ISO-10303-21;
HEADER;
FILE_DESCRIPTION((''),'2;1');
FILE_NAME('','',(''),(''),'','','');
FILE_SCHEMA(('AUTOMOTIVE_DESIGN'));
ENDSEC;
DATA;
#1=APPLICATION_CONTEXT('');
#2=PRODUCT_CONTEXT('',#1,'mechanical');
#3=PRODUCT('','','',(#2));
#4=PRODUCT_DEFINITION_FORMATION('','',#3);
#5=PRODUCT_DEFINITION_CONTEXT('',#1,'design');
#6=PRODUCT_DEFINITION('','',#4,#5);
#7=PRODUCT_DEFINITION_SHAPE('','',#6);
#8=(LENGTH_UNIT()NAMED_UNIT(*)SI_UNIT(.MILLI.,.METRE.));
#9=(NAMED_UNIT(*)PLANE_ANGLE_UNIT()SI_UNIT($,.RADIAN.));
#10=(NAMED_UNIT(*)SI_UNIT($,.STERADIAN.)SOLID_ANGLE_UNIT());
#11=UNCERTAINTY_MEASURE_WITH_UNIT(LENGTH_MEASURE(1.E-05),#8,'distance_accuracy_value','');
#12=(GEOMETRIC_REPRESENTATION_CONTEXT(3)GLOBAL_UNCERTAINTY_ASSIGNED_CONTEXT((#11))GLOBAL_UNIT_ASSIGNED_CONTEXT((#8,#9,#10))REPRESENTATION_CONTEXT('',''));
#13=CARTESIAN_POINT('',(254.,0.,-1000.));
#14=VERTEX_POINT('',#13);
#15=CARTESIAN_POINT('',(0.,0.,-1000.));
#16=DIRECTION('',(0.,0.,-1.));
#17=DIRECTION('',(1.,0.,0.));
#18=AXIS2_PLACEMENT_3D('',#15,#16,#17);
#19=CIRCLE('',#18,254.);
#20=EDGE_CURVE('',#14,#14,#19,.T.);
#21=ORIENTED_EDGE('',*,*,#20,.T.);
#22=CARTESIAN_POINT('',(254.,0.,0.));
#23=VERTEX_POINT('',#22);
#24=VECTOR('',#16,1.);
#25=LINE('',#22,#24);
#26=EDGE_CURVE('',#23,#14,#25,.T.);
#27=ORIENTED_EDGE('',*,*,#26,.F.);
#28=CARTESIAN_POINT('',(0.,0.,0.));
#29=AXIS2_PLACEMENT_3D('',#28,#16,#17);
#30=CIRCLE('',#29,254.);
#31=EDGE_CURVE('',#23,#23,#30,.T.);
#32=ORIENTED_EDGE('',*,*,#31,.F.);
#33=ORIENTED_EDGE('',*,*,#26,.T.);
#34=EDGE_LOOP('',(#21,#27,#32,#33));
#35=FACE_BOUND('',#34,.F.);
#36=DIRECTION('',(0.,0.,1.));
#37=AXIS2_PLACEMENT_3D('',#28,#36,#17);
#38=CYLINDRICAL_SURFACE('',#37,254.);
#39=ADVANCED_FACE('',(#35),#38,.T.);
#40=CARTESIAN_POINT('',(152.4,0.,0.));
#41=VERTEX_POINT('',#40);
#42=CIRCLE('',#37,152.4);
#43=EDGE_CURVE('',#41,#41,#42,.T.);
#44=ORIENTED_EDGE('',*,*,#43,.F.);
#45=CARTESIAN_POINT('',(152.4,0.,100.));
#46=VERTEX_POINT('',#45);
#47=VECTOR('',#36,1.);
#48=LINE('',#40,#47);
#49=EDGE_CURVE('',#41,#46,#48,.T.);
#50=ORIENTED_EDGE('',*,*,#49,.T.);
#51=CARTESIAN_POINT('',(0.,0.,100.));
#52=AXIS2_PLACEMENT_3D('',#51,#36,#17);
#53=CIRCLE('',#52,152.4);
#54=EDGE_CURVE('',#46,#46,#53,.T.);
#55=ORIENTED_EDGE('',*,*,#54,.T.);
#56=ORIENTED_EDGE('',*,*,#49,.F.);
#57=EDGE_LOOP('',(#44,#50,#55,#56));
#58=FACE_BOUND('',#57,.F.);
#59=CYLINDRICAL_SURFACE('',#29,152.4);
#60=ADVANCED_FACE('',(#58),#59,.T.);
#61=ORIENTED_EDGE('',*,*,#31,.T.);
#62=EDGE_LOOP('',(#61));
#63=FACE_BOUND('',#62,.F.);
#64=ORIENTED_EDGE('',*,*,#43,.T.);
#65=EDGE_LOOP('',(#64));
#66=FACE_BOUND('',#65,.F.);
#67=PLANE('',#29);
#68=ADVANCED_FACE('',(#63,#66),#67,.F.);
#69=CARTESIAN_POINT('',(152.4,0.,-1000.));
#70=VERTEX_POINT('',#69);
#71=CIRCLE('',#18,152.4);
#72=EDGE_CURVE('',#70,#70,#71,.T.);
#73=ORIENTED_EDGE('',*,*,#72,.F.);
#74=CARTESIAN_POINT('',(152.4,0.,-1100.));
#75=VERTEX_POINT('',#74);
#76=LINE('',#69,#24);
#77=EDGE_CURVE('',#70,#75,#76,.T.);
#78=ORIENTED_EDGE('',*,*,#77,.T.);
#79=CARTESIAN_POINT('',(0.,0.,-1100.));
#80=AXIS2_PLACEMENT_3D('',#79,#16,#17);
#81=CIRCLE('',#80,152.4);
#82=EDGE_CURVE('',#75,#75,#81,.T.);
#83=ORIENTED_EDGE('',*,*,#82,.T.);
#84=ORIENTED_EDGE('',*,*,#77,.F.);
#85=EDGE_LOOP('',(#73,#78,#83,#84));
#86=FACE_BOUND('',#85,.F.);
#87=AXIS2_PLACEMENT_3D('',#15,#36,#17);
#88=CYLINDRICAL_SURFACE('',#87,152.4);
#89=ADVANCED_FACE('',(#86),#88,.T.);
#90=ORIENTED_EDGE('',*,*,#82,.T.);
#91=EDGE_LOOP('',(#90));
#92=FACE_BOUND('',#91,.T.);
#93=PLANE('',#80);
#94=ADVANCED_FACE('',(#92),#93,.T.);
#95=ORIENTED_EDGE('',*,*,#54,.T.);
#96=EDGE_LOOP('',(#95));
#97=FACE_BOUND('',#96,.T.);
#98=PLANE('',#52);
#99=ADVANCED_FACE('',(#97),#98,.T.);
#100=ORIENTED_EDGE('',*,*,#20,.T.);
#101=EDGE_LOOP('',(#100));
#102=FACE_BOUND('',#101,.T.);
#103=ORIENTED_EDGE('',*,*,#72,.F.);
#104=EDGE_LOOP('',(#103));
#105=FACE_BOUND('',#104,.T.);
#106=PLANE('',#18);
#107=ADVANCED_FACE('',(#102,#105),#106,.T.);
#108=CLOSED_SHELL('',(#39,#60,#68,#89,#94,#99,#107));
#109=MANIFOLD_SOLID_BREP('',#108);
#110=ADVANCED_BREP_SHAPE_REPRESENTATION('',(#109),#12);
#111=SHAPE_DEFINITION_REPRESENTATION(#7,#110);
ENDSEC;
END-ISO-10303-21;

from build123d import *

# Parameters (mm, degrees)
F0_R     = 152.4
F1_DEPTH = 100
F2_R     = 254
F2_R_2   = 152.4
F3_DEPTH = 1000
F4_R     = 152.4
F5_DEPTH = 100


with BuildPart() as f1:
    # F0 (on Top) → F1 (new body)
    with BuildSketch(Plane.XY):
        Circle(F0_R)
    extrude(amount=F1_DEPTH)

    # F2 (on face) → F3 (join)
    with BuildSketch(Plane(origin=(0, 0, 0), x_dir=(1, 0, 0), z_dir=(0, 0, -1))):
        Circle(F2_R)
        Circle(F2_R_2, mode=Mode.SUBTRACT)
        Circle(F2_R_2)
    extrude(amount=F3_DEPTH)

    # F4 (on face) → F5 (join)
    with BuildSketch(Plane(origin=(0, 0, -1000), x_dir=(1, 0, 0), z_dir=(0, 0, -1))):
        Circle(F4_R)
    extrude(amount=F5_DEPTH)


solid = f1.part
